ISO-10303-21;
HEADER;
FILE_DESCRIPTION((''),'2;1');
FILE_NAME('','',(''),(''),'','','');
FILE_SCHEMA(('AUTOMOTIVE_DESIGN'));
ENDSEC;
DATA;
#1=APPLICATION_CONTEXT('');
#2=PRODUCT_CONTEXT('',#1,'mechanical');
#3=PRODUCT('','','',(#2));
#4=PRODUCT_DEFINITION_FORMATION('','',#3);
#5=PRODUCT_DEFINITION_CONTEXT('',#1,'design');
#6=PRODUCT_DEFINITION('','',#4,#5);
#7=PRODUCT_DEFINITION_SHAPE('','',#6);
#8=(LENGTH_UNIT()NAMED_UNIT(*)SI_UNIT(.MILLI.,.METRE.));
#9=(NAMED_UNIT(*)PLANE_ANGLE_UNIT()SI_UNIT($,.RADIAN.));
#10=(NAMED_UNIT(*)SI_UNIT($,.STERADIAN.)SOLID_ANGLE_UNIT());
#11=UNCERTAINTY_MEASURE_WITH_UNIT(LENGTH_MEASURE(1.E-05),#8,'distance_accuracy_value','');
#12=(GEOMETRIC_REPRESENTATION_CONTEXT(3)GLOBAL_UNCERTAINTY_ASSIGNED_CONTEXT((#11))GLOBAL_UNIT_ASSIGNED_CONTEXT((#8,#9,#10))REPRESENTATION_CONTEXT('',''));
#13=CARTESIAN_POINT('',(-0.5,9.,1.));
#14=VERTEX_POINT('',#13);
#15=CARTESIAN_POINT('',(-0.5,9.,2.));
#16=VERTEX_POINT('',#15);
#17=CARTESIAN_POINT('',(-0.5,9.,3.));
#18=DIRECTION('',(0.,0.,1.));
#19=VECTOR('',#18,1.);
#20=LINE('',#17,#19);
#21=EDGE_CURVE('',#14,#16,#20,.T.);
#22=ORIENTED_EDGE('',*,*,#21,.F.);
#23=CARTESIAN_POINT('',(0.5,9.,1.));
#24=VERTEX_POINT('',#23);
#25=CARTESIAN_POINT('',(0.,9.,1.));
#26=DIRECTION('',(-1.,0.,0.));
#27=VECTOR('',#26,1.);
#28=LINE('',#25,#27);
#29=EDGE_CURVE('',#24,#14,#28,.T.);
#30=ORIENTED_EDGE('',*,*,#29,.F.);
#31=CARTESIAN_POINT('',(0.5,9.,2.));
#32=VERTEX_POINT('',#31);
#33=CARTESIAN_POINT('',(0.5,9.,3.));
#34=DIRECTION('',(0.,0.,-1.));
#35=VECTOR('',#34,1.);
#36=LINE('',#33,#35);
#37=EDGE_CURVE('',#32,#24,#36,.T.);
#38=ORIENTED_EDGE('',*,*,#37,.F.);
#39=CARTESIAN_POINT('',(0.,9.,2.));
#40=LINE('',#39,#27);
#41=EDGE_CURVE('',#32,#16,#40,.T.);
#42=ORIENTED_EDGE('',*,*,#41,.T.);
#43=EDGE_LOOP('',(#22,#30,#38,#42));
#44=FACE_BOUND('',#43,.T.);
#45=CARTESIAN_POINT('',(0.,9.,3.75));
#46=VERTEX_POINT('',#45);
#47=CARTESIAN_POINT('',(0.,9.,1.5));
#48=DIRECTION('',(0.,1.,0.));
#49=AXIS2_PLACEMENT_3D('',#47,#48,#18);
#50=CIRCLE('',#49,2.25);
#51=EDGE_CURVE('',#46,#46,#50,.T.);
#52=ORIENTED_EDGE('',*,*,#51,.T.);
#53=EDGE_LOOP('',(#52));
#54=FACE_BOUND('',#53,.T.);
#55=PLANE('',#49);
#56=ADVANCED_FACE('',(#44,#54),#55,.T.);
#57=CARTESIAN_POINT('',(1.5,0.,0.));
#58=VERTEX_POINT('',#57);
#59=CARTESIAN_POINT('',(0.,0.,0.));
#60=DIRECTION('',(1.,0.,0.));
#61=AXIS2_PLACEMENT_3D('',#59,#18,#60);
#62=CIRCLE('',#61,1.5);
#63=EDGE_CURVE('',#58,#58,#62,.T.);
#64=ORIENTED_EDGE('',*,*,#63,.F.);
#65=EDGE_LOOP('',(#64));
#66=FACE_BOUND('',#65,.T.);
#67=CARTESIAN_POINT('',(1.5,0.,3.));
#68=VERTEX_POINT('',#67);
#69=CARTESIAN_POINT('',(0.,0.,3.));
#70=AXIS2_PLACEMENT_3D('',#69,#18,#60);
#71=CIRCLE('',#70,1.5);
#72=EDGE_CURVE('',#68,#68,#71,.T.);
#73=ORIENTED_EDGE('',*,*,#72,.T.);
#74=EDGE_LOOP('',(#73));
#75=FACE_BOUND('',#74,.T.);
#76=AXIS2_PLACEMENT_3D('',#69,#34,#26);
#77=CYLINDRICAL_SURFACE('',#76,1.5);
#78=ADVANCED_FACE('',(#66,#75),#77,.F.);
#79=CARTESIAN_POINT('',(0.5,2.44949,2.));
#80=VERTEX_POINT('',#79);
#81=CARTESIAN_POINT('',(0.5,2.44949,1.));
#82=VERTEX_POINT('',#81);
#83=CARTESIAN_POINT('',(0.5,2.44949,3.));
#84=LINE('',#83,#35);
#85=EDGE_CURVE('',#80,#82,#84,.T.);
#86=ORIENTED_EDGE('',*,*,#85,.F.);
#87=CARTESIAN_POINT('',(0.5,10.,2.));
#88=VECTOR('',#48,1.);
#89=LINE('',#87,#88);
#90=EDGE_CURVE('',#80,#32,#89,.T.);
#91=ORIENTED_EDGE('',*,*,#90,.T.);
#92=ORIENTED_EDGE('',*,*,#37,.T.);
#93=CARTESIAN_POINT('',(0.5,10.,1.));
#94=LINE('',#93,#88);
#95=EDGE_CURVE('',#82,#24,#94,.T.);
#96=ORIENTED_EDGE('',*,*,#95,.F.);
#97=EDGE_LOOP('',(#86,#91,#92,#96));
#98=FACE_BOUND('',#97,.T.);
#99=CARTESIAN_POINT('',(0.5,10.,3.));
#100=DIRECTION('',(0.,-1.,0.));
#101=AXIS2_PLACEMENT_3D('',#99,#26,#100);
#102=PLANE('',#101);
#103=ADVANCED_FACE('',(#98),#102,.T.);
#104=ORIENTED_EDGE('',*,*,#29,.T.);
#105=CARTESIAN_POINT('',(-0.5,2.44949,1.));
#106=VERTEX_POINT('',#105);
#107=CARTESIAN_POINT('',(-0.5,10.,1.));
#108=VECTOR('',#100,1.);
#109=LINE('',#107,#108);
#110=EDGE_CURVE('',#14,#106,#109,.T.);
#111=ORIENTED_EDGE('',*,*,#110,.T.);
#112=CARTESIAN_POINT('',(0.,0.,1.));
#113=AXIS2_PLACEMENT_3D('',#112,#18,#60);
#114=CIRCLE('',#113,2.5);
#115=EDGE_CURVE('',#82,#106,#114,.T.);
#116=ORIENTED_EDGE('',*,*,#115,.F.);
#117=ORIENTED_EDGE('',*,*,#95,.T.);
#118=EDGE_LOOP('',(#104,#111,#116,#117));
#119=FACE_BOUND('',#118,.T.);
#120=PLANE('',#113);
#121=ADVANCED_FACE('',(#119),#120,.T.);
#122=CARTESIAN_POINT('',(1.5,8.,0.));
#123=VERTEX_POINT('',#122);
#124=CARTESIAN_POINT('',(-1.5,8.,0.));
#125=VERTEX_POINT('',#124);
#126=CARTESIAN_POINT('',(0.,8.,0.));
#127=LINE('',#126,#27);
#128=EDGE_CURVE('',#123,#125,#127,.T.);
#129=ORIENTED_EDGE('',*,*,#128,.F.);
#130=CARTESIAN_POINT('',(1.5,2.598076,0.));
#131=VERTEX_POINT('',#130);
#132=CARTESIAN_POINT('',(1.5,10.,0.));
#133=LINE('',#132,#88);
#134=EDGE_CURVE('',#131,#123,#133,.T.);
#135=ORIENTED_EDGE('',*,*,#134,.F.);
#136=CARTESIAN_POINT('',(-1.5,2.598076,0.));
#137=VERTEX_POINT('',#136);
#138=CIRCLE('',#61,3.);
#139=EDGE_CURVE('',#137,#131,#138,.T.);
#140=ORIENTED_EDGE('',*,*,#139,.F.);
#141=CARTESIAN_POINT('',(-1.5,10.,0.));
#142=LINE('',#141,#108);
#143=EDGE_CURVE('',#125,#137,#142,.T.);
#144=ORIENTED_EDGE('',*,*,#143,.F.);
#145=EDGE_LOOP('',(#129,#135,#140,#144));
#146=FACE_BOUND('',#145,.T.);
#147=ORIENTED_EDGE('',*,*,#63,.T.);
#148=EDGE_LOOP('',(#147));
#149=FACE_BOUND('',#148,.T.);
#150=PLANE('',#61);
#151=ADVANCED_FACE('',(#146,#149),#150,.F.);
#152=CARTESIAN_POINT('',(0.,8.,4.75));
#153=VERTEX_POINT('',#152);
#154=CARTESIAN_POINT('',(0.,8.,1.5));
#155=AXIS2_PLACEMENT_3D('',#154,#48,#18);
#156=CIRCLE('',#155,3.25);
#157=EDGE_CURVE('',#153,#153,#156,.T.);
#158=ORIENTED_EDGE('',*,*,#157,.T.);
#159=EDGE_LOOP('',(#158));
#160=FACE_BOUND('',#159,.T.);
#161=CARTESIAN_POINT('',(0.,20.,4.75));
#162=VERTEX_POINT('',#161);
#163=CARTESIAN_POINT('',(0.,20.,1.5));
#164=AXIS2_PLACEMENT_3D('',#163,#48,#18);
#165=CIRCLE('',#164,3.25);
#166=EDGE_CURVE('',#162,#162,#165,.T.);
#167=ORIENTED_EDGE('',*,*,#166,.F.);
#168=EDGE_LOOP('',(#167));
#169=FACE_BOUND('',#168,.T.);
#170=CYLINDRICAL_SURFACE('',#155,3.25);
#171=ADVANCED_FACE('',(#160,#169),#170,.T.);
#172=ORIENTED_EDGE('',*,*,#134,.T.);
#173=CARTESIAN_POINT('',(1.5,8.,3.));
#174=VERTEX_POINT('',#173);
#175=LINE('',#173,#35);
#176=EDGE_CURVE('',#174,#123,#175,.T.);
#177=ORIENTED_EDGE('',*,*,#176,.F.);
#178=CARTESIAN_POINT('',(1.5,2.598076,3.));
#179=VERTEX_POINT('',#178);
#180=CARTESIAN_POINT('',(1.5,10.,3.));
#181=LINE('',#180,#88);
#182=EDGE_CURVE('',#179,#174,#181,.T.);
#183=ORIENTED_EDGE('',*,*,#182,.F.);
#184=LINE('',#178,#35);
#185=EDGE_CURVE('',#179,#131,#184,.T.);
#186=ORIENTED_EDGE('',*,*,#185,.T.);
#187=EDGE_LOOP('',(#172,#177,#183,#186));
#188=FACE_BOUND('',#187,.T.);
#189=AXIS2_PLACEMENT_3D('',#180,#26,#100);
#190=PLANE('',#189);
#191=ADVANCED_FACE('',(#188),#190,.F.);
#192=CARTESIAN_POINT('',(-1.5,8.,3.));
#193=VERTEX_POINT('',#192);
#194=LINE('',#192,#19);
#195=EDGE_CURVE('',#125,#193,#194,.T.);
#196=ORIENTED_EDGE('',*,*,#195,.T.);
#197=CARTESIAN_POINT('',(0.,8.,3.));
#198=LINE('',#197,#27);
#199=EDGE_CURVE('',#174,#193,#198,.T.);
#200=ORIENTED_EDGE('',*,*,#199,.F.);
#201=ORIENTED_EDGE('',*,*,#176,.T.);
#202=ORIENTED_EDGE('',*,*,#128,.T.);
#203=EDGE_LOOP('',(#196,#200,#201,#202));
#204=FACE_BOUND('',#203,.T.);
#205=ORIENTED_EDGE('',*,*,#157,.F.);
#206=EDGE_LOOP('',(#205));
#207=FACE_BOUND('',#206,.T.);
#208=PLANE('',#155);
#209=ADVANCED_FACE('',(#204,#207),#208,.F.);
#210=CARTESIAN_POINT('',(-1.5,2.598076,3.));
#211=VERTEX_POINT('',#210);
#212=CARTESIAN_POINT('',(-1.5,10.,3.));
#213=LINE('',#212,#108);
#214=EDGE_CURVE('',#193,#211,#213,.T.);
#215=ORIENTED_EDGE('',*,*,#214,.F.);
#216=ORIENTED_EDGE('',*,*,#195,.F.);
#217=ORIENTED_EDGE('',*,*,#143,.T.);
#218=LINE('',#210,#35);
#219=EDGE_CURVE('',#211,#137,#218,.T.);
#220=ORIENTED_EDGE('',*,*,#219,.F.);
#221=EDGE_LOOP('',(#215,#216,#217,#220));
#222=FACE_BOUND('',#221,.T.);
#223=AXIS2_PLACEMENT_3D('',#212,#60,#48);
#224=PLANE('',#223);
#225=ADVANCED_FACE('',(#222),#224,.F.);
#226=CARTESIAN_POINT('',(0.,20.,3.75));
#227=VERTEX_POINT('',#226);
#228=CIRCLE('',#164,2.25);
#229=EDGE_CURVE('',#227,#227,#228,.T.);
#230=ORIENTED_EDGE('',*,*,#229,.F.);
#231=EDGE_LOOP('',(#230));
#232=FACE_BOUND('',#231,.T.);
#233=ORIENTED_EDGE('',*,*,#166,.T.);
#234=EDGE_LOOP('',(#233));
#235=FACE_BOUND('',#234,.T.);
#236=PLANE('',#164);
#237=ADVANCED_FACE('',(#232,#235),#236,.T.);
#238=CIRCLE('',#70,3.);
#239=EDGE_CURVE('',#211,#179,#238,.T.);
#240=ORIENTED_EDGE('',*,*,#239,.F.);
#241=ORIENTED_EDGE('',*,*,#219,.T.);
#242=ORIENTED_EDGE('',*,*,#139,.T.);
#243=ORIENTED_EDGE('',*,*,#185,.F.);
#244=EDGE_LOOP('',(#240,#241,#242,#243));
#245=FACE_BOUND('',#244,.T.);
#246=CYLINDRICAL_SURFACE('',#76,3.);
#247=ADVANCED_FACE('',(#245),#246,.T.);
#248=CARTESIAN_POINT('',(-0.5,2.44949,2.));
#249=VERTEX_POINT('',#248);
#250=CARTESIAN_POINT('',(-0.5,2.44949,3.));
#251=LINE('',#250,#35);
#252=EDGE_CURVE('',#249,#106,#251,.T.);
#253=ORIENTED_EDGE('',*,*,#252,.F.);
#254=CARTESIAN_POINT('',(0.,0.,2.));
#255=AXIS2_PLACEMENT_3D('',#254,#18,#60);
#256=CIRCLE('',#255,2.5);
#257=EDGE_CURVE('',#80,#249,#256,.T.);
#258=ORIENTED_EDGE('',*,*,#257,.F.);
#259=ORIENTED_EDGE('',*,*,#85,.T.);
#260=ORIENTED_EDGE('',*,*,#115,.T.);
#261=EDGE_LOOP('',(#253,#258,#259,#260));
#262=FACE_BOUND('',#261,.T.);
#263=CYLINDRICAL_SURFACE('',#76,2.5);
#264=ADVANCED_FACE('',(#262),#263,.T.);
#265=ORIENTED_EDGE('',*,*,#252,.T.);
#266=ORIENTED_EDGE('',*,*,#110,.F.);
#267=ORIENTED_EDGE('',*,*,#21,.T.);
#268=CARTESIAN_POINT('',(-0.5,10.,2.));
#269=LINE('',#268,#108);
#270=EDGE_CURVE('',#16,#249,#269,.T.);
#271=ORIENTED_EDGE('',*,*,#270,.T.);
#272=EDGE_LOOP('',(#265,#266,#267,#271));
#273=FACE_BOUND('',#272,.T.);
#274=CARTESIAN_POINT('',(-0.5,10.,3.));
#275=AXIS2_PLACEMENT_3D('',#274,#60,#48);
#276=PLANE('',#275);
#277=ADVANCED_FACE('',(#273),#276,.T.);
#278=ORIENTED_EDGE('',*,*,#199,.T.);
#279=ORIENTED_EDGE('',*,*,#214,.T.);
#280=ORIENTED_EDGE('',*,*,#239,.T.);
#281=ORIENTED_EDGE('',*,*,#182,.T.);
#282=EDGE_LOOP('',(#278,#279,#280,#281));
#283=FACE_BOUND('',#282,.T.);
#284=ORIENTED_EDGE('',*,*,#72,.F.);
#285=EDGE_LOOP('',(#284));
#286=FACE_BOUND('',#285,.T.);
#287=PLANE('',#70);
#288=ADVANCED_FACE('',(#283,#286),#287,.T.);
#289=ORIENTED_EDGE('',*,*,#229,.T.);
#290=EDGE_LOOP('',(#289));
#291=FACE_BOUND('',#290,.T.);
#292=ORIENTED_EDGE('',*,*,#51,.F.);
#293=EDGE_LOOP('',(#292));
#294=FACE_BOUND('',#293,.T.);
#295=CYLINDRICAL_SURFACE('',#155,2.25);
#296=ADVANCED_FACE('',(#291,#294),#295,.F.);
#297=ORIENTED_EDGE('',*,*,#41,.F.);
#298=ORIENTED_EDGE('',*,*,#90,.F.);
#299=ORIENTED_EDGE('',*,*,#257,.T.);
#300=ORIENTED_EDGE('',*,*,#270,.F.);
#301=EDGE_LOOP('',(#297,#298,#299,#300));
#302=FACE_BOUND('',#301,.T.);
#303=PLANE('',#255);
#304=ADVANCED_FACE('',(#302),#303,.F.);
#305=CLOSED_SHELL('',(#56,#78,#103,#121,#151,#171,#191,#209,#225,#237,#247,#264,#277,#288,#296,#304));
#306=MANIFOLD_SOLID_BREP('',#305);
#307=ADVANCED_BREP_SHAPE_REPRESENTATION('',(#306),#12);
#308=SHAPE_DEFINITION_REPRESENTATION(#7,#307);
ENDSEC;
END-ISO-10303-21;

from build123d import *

# Parameters (mm, degrees)
CROQUIS1_R                   = 1.5
SALIENTE_EXTRUIR1_DEPTH      = 3
SALIENTE_EXTRUIR2_DEPTH      = 10
SALIENTE_EXTRUIR2_DEPTH_BACK = 2
CROQUIS2_R                   = 3.25
VACIADO1_T                   = -1


with BuildPart() as part:
    # Croquis1 → Saliente-Extruir1 (new body)
    with BuildSketch(Plane.XY):
        with BuildLine():
            Line((1.5, 10), (-1.5, 10))
            Line((-1.5, 10), (-1.5, 2.598076211))
            ThreePointArc((-1.5, 2.598076211), (0, -3), (1.5, 2.598076211))
            Line((1.5, 2.598076211), (1.5, 10))
        make_face()
        Circle(CROQUIS1_R, mode=Mode.SUBTRACT)
    extrude(amount=SALIENTE_EXTRUIR1_DEPTH)

    # Croquis2 → Saliente-Extruir2 (add, two sides: drawn at the far end of the back side and taken through both)
    with BuildSketch(Plane(origin=(0, 10, 0), x_dir=(1, 0, 0), z_dir=(0, 1, 0)).offset(-SALIENTE_EXTRUIR2_DEPTH_BACK)):
        with Locations((0, -1.5)):
            Circle(CROQUIS2_R)
    extrude(amount=SALIENTE_EXTRUIR2_DEPTH + SALIENTE_EXTRUIR2_DEPTH_BACK)

    # Vaciado1
    vaciado1_openings = [part.faces().sort_by_distance(p)[0] for p in [
        (0, 20, 1.5),
    ]]
    offset(amount=VACIADO1_T, openings=vaciado1_openings, kind=Kind.INTERSECTION)


solid = part.part
